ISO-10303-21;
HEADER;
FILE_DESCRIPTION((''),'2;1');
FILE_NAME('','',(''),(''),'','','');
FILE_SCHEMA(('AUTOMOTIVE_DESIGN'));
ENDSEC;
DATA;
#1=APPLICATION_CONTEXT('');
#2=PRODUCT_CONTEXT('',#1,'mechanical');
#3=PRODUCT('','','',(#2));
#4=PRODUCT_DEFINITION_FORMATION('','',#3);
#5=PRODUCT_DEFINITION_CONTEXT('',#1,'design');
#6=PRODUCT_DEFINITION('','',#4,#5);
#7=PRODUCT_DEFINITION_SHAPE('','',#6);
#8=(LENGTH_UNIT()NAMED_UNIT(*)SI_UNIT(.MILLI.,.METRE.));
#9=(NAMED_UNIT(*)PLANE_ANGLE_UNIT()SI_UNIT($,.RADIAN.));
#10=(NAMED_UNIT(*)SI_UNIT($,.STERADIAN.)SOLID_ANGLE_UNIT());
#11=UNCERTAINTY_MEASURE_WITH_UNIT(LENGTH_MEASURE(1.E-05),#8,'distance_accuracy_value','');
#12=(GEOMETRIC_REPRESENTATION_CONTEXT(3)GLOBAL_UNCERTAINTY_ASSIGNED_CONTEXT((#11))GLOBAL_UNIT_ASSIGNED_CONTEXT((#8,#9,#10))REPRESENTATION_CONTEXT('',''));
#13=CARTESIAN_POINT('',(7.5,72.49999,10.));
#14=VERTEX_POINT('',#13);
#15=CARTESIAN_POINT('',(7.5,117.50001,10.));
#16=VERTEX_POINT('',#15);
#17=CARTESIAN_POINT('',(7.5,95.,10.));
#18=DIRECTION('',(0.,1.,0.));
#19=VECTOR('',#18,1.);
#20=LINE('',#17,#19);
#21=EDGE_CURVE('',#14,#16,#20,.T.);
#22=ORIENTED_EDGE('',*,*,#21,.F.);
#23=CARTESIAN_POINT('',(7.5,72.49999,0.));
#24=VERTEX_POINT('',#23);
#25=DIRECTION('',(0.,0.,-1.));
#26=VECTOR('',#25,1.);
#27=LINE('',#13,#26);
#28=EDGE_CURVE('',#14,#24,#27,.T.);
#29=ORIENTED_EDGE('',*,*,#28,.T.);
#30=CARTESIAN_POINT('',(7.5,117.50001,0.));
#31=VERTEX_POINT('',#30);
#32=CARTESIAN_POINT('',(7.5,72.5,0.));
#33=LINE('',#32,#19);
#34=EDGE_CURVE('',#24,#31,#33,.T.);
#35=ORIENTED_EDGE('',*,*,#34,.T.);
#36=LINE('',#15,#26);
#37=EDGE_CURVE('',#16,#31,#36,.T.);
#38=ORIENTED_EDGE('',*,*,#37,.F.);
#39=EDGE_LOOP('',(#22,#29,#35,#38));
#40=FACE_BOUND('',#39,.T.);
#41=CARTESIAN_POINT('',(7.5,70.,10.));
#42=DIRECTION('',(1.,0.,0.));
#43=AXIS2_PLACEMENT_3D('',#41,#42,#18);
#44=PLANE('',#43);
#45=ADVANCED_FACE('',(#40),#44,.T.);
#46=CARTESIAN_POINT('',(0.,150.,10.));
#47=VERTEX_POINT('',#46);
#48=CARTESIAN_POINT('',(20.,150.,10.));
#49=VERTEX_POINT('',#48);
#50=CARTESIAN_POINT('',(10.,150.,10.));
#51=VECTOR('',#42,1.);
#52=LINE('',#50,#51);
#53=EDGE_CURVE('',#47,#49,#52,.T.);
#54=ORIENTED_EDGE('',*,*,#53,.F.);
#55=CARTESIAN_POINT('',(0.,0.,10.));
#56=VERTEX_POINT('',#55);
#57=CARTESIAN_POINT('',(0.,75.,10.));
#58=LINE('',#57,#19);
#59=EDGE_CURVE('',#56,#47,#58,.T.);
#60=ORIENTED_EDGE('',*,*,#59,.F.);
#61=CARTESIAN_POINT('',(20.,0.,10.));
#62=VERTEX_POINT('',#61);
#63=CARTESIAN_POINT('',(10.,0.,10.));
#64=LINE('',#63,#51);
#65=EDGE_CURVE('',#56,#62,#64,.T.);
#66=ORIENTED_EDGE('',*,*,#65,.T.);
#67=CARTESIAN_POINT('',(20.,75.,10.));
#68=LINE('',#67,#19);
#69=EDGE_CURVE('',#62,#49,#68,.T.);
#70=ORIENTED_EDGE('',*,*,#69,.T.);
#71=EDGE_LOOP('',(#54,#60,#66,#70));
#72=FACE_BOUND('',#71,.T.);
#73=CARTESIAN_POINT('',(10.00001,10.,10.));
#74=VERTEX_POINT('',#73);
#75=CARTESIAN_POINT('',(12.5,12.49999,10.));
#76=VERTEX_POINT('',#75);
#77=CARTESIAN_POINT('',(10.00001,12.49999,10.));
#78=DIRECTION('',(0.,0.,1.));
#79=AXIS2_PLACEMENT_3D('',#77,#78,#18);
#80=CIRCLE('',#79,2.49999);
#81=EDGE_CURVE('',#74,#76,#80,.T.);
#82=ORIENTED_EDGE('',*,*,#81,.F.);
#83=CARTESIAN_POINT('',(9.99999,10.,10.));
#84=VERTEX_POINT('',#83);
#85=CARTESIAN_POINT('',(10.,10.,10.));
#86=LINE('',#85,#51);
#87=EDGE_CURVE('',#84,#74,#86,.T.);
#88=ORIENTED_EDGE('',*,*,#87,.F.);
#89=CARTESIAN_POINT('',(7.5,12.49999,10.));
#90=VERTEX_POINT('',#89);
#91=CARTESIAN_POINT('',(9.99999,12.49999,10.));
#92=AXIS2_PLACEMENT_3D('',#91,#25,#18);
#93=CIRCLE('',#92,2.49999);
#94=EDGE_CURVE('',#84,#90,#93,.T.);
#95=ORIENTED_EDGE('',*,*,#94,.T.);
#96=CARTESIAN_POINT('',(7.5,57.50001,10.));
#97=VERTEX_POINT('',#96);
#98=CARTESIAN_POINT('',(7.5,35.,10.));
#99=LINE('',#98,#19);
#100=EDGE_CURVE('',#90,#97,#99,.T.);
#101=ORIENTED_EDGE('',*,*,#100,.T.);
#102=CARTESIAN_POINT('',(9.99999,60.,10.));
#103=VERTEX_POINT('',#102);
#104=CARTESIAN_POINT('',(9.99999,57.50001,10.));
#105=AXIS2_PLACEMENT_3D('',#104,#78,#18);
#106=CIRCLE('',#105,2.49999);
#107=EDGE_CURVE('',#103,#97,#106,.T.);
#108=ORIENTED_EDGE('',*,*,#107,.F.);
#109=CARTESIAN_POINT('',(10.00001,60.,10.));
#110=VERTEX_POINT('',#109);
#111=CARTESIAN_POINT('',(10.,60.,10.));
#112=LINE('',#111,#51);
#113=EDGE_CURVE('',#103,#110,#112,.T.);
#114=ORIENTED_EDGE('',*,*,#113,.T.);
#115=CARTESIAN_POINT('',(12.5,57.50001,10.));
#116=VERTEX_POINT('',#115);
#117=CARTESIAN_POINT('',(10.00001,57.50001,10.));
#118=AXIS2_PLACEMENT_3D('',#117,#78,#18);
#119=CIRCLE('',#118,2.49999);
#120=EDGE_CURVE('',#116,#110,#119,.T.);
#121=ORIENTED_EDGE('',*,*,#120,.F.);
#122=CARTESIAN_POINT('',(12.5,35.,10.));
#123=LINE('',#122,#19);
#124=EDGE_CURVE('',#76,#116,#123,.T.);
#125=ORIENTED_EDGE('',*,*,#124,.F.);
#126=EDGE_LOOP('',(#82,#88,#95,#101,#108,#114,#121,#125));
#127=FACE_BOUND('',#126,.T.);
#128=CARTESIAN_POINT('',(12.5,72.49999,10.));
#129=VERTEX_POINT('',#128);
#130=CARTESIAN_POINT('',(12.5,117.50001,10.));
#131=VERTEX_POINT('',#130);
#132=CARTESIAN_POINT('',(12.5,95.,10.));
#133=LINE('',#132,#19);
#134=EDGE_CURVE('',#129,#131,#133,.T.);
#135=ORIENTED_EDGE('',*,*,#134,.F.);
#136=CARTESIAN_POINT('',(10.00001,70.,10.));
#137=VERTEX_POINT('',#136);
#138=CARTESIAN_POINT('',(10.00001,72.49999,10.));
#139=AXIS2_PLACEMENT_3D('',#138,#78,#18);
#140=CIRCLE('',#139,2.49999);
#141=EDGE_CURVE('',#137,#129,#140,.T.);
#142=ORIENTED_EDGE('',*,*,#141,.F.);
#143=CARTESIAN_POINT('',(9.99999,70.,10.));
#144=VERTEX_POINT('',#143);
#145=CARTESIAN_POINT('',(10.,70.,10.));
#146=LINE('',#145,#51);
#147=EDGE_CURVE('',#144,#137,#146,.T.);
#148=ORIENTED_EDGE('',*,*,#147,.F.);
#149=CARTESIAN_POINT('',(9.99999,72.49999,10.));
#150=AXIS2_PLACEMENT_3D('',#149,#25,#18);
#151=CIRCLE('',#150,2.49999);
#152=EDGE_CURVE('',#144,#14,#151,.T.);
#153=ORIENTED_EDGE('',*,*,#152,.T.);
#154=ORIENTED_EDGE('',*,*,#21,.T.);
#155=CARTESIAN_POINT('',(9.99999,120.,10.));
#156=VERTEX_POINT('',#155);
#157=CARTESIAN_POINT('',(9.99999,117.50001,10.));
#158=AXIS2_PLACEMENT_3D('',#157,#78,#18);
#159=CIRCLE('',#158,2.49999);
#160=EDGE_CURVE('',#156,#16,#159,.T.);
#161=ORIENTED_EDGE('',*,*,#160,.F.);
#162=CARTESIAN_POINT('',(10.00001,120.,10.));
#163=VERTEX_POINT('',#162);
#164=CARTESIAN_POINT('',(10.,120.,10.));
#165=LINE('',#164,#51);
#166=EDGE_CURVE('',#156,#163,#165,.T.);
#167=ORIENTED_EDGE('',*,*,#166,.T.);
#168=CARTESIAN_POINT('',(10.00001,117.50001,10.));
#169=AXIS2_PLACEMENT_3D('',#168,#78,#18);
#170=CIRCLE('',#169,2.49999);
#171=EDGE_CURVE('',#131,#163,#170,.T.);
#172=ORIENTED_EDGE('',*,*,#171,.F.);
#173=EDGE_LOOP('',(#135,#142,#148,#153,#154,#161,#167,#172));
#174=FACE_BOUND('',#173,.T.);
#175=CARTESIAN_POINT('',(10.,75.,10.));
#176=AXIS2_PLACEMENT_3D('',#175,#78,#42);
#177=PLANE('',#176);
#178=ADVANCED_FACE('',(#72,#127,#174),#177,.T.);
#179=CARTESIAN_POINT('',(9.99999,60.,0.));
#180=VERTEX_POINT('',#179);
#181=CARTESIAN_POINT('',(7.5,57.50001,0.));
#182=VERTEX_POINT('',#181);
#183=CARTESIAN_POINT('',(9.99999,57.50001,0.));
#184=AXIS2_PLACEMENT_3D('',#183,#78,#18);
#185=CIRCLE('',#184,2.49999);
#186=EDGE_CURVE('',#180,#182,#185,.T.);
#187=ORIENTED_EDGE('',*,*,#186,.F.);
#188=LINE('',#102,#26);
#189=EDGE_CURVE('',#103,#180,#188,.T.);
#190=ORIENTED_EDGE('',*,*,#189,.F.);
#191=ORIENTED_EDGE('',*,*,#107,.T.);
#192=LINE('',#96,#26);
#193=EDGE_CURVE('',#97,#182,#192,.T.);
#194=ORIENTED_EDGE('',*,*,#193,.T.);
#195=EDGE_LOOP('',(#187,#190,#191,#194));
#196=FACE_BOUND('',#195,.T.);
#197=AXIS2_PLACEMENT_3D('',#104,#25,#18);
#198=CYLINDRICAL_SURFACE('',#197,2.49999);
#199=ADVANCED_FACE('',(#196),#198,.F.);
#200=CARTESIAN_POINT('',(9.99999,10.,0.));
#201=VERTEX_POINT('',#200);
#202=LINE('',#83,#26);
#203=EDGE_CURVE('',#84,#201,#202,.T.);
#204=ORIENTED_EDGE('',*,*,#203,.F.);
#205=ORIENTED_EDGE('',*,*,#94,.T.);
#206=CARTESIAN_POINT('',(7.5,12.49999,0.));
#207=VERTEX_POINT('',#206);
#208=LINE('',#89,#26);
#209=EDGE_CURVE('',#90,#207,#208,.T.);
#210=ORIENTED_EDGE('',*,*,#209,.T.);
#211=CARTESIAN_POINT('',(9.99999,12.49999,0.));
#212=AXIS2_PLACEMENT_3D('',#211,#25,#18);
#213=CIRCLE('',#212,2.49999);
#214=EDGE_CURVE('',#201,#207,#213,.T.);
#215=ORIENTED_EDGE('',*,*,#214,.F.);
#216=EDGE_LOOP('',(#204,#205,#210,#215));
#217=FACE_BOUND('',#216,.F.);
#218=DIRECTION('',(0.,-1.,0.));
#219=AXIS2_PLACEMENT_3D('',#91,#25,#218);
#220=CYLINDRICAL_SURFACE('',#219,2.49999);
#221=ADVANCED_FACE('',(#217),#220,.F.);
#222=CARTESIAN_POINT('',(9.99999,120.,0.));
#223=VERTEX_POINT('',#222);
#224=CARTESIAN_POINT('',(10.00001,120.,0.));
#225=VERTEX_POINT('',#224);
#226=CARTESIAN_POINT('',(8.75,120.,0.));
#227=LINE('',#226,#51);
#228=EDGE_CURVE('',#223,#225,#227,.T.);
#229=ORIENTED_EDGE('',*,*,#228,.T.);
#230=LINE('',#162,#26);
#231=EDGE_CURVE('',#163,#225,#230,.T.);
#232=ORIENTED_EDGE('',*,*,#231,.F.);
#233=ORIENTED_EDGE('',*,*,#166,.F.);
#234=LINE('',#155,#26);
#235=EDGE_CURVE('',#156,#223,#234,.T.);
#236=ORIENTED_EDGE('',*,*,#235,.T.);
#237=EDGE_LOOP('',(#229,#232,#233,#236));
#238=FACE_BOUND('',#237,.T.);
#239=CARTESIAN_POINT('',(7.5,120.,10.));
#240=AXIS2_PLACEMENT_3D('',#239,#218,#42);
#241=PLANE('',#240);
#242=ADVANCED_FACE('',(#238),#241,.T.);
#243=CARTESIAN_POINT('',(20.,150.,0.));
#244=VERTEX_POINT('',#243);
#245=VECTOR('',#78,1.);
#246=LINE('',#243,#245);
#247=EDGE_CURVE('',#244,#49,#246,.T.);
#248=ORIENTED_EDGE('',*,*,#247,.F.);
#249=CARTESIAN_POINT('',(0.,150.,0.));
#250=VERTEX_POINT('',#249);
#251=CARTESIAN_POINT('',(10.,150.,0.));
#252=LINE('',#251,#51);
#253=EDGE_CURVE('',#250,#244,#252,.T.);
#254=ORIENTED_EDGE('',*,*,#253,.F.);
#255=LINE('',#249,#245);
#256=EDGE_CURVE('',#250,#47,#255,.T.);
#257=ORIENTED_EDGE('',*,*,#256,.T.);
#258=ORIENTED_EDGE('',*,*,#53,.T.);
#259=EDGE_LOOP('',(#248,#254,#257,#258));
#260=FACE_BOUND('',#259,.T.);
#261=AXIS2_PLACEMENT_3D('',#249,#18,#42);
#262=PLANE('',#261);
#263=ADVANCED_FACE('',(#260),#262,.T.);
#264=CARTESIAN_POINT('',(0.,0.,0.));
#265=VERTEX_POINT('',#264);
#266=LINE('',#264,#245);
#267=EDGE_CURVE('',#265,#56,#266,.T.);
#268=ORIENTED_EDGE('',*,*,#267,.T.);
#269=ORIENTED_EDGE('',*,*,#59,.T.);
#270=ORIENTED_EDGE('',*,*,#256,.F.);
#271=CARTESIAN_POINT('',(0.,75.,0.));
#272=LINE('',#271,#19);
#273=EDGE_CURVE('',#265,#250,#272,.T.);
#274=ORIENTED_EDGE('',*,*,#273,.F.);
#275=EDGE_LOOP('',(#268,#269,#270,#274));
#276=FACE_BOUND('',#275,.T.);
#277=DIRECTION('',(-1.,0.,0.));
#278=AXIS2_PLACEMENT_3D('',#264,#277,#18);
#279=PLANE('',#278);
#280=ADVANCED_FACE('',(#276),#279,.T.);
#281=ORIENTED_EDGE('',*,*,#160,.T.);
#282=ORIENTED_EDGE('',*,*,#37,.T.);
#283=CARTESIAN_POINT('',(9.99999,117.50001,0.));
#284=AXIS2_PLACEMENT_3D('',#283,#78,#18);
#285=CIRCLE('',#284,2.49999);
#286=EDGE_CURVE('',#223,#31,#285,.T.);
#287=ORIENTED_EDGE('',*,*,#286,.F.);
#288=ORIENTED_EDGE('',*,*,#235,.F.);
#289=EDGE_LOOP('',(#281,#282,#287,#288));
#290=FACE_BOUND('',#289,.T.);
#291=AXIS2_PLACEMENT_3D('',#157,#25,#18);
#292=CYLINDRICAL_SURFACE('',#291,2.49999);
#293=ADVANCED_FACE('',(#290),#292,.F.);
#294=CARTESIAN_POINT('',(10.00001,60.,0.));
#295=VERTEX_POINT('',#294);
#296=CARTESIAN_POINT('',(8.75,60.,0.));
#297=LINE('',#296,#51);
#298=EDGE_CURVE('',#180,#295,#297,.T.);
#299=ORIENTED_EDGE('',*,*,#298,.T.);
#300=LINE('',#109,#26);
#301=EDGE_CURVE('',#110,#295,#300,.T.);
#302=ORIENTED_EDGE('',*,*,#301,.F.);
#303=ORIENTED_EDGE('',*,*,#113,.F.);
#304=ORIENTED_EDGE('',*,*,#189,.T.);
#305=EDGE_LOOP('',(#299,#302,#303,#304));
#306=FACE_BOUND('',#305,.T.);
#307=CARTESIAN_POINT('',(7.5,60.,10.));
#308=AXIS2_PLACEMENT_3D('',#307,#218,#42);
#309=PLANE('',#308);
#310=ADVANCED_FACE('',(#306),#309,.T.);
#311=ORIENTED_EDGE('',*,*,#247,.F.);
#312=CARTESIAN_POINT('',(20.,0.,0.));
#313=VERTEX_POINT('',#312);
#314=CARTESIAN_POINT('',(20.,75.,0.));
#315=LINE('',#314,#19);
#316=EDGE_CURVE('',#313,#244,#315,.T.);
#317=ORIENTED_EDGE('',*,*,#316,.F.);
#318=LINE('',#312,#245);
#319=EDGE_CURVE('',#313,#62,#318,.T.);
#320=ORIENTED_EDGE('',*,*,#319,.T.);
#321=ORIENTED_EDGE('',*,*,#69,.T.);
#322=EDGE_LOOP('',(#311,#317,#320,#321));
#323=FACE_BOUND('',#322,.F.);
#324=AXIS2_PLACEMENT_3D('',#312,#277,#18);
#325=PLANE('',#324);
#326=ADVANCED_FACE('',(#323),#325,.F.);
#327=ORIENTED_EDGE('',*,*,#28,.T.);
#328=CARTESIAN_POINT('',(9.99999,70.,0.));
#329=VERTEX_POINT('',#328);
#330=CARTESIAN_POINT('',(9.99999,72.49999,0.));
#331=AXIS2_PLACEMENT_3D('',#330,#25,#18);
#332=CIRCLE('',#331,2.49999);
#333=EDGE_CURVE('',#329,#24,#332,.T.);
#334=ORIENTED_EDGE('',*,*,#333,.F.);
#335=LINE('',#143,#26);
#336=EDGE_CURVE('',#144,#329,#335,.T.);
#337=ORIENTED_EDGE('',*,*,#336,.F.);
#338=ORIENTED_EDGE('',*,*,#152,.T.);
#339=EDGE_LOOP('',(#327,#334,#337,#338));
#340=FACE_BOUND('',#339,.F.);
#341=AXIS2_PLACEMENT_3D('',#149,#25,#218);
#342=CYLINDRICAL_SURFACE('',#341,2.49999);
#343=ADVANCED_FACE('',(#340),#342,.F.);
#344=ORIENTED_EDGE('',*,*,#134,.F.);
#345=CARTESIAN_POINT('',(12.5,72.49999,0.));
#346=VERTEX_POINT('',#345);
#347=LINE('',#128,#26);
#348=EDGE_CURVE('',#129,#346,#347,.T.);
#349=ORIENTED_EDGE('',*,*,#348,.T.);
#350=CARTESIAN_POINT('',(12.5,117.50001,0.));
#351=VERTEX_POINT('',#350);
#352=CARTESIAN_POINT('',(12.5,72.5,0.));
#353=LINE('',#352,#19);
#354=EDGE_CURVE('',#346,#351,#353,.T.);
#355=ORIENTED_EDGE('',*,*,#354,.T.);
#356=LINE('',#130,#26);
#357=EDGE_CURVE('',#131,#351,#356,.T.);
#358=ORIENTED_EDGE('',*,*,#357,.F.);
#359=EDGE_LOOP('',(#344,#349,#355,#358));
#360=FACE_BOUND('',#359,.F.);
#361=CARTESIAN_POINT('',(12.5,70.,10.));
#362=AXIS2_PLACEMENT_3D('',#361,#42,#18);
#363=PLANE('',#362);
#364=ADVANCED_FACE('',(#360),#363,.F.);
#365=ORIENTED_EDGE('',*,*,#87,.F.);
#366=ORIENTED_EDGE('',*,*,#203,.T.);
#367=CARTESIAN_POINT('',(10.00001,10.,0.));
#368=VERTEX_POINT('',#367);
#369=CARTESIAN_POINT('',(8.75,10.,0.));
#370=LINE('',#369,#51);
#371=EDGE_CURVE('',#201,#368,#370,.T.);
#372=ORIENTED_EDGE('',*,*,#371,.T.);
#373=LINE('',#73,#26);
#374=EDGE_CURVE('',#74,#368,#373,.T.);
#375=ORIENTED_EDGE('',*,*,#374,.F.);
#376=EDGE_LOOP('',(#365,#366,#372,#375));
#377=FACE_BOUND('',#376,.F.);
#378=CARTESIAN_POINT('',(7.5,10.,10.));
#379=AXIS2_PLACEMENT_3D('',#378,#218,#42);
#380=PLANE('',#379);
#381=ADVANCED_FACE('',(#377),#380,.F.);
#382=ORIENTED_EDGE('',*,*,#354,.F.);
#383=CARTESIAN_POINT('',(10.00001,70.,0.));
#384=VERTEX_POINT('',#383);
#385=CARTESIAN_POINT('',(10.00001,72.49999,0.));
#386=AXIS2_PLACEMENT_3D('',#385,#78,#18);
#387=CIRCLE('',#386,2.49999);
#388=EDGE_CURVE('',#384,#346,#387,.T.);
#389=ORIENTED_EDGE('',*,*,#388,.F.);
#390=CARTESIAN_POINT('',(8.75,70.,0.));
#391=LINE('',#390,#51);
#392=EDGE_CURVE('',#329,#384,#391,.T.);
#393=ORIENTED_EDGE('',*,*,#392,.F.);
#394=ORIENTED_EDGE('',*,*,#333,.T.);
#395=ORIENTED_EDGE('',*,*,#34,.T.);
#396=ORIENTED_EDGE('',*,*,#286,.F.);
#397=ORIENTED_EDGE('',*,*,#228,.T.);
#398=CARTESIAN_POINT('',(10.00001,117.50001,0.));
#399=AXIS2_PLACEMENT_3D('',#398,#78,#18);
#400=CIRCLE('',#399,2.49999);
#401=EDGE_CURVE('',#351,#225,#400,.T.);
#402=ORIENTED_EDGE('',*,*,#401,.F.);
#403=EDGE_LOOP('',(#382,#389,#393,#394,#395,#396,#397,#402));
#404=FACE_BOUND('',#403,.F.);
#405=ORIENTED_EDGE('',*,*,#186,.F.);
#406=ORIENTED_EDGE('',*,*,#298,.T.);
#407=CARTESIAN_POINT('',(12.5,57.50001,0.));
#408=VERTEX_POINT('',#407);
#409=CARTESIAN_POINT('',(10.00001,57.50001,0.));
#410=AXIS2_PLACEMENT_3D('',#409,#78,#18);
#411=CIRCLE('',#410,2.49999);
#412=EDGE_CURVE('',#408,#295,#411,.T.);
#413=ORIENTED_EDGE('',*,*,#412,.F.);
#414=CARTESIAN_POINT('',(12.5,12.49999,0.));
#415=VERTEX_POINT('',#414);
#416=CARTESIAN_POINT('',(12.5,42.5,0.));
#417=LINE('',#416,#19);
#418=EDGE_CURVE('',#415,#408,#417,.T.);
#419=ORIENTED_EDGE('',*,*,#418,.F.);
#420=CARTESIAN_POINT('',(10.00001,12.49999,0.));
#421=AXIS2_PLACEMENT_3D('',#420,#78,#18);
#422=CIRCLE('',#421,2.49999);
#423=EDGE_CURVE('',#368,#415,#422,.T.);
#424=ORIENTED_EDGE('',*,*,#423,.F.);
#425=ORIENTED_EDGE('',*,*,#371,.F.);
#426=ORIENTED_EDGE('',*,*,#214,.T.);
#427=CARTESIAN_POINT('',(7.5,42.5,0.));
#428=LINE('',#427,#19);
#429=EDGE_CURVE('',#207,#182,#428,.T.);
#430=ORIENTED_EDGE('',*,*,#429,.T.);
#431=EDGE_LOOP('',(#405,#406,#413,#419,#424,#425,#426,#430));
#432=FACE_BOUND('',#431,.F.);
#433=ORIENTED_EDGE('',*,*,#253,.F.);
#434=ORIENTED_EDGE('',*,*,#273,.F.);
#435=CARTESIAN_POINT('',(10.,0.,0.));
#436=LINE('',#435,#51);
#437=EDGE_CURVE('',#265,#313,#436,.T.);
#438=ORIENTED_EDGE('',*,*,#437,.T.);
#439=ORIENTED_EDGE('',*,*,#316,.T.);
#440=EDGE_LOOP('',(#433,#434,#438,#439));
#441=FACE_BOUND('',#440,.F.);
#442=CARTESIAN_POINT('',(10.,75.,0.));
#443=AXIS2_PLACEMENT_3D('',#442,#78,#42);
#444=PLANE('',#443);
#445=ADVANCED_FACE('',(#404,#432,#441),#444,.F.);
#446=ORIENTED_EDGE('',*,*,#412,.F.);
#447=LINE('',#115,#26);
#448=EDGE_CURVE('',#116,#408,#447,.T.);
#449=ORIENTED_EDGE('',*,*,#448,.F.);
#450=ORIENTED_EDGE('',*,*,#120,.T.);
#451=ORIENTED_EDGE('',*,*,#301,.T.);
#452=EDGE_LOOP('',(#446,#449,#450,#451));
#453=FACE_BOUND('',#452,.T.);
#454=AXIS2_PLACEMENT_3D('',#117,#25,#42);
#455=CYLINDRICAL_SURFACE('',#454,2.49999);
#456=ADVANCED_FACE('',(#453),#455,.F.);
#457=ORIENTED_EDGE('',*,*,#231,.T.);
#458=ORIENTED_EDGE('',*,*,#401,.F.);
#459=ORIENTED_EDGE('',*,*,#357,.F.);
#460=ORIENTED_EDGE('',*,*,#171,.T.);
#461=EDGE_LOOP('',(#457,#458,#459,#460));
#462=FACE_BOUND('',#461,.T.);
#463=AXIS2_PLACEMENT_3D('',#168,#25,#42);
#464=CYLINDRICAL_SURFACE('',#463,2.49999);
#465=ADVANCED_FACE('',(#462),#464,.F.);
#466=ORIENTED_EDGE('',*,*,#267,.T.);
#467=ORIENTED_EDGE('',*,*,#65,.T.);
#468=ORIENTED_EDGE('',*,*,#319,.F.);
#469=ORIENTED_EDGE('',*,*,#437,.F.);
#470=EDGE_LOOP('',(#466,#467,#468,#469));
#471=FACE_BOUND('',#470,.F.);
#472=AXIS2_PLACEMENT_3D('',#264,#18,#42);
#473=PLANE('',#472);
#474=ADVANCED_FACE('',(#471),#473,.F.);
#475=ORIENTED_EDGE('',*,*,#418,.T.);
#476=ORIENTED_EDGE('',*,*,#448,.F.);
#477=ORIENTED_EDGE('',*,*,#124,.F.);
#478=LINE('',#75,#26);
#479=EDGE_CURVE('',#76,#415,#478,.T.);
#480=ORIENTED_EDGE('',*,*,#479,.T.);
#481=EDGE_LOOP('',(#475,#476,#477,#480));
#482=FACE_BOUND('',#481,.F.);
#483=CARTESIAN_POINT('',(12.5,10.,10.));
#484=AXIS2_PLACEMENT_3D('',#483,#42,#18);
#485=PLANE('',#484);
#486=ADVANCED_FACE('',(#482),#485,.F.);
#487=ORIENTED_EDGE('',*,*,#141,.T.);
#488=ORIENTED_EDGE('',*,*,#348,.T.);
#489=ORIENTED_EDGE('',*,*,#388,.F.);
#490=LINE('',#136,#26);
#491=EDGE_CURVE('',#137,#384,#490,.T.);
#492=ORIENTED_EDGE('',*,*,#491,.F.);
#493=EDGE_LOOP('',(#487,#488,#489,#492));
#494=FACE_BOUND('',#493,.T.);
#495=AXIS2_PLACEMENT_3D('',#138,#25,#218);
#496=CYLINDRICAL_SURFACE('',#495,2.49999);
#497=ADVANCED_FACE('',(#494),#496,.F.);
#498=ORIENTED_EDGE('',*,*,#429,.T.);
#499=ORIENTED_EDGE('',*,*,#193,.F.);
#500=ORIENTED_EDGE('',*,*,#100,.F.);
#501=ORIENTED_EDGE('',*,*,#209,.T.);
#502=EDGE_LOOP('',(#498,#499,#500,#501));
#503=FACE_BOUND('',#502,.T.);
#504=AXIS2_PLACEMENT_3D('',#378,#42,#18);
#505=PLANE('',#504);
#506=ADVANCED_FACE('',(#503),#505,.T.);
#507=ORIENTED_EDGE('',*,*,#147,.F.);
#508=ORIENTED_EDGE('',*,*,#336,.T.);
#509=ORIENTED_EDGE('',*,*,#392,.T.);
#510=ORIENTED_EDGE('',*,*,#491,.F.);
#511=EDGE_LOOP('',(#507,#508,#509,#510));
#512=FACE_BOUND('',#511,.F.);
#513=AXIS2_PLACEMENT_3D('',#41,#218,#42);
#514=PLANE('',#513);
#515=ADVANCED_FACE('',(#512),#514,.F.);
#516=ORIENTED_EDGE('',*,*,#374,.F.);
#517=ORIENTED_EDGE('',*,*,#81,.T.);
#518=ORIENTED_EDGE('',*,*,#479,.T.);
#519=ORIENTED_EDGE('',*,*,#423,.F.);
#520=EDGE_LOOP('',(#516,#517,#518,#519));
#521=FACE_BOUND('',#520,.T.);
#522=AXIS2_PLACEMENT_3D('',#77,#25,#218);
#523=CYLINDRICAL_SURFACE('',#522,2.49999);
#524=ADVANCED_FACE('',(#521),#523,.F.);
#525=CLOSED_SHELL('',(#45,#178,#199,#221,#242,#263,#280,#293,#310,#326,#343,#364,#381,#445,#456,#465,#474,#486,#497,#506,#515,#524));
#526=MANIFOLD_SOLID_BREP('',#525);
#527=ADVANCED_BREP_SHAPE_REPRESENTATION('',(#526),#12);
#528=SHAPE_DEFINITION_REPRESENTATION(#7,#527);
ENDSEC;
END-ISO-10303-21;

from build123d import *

# Parameters (mm, degrees)
F0_W     = 20
F0_H     = 150
F1_DEPTH = 10
F2_W     = 5
F2_H     = 50
F3_DEPTH = 25
F4_R     = 2.49999


# Not quite as in the source:
# - a fillet or chamfer is up to 0.001 mm smaller than in the source, because OpenCascade refuses the exact size


with BuildPart() as f1:
    # F0 (on Top) → F1 (new body)
    with BuildSketch(Plane.XY):
        with Locations((10, 75)):
            Rectangle(F0_W, F0_H)
    extrude(amount=F1_DEPTH)

    # F2 (on face) → F3 (cut)
    with BuildSketch(Plane.XY.offset(10)):
        with Locations((10, 95)):
            Rectangle(F2_W, F2_H)
        with Locations((10, 35)):
            Rectangle(F2_W, F2_H)
    extrude(amount=-F3_DEPTH, mode=Mode.SUBTRACT)

    # F4 (radius 2.5 in the source; OpenCascade refuses exactly that, so slightly less here)
    f4_edges = [f1.edges().sort_by_distance(p)[0] for p in [
        (12.5, 60, 5),
        (7.5, 60, 5),
        (7.5, 120, 5),
        (12.5, 120, 5),
        (7.5, 70, 5),
        (7.5, 10, 5),
        (12.5, 10, 5),
        (12.5, 70, 5),
    ]]
    fillet(f4_edges, radius=F4_R)


solid = f1.part
